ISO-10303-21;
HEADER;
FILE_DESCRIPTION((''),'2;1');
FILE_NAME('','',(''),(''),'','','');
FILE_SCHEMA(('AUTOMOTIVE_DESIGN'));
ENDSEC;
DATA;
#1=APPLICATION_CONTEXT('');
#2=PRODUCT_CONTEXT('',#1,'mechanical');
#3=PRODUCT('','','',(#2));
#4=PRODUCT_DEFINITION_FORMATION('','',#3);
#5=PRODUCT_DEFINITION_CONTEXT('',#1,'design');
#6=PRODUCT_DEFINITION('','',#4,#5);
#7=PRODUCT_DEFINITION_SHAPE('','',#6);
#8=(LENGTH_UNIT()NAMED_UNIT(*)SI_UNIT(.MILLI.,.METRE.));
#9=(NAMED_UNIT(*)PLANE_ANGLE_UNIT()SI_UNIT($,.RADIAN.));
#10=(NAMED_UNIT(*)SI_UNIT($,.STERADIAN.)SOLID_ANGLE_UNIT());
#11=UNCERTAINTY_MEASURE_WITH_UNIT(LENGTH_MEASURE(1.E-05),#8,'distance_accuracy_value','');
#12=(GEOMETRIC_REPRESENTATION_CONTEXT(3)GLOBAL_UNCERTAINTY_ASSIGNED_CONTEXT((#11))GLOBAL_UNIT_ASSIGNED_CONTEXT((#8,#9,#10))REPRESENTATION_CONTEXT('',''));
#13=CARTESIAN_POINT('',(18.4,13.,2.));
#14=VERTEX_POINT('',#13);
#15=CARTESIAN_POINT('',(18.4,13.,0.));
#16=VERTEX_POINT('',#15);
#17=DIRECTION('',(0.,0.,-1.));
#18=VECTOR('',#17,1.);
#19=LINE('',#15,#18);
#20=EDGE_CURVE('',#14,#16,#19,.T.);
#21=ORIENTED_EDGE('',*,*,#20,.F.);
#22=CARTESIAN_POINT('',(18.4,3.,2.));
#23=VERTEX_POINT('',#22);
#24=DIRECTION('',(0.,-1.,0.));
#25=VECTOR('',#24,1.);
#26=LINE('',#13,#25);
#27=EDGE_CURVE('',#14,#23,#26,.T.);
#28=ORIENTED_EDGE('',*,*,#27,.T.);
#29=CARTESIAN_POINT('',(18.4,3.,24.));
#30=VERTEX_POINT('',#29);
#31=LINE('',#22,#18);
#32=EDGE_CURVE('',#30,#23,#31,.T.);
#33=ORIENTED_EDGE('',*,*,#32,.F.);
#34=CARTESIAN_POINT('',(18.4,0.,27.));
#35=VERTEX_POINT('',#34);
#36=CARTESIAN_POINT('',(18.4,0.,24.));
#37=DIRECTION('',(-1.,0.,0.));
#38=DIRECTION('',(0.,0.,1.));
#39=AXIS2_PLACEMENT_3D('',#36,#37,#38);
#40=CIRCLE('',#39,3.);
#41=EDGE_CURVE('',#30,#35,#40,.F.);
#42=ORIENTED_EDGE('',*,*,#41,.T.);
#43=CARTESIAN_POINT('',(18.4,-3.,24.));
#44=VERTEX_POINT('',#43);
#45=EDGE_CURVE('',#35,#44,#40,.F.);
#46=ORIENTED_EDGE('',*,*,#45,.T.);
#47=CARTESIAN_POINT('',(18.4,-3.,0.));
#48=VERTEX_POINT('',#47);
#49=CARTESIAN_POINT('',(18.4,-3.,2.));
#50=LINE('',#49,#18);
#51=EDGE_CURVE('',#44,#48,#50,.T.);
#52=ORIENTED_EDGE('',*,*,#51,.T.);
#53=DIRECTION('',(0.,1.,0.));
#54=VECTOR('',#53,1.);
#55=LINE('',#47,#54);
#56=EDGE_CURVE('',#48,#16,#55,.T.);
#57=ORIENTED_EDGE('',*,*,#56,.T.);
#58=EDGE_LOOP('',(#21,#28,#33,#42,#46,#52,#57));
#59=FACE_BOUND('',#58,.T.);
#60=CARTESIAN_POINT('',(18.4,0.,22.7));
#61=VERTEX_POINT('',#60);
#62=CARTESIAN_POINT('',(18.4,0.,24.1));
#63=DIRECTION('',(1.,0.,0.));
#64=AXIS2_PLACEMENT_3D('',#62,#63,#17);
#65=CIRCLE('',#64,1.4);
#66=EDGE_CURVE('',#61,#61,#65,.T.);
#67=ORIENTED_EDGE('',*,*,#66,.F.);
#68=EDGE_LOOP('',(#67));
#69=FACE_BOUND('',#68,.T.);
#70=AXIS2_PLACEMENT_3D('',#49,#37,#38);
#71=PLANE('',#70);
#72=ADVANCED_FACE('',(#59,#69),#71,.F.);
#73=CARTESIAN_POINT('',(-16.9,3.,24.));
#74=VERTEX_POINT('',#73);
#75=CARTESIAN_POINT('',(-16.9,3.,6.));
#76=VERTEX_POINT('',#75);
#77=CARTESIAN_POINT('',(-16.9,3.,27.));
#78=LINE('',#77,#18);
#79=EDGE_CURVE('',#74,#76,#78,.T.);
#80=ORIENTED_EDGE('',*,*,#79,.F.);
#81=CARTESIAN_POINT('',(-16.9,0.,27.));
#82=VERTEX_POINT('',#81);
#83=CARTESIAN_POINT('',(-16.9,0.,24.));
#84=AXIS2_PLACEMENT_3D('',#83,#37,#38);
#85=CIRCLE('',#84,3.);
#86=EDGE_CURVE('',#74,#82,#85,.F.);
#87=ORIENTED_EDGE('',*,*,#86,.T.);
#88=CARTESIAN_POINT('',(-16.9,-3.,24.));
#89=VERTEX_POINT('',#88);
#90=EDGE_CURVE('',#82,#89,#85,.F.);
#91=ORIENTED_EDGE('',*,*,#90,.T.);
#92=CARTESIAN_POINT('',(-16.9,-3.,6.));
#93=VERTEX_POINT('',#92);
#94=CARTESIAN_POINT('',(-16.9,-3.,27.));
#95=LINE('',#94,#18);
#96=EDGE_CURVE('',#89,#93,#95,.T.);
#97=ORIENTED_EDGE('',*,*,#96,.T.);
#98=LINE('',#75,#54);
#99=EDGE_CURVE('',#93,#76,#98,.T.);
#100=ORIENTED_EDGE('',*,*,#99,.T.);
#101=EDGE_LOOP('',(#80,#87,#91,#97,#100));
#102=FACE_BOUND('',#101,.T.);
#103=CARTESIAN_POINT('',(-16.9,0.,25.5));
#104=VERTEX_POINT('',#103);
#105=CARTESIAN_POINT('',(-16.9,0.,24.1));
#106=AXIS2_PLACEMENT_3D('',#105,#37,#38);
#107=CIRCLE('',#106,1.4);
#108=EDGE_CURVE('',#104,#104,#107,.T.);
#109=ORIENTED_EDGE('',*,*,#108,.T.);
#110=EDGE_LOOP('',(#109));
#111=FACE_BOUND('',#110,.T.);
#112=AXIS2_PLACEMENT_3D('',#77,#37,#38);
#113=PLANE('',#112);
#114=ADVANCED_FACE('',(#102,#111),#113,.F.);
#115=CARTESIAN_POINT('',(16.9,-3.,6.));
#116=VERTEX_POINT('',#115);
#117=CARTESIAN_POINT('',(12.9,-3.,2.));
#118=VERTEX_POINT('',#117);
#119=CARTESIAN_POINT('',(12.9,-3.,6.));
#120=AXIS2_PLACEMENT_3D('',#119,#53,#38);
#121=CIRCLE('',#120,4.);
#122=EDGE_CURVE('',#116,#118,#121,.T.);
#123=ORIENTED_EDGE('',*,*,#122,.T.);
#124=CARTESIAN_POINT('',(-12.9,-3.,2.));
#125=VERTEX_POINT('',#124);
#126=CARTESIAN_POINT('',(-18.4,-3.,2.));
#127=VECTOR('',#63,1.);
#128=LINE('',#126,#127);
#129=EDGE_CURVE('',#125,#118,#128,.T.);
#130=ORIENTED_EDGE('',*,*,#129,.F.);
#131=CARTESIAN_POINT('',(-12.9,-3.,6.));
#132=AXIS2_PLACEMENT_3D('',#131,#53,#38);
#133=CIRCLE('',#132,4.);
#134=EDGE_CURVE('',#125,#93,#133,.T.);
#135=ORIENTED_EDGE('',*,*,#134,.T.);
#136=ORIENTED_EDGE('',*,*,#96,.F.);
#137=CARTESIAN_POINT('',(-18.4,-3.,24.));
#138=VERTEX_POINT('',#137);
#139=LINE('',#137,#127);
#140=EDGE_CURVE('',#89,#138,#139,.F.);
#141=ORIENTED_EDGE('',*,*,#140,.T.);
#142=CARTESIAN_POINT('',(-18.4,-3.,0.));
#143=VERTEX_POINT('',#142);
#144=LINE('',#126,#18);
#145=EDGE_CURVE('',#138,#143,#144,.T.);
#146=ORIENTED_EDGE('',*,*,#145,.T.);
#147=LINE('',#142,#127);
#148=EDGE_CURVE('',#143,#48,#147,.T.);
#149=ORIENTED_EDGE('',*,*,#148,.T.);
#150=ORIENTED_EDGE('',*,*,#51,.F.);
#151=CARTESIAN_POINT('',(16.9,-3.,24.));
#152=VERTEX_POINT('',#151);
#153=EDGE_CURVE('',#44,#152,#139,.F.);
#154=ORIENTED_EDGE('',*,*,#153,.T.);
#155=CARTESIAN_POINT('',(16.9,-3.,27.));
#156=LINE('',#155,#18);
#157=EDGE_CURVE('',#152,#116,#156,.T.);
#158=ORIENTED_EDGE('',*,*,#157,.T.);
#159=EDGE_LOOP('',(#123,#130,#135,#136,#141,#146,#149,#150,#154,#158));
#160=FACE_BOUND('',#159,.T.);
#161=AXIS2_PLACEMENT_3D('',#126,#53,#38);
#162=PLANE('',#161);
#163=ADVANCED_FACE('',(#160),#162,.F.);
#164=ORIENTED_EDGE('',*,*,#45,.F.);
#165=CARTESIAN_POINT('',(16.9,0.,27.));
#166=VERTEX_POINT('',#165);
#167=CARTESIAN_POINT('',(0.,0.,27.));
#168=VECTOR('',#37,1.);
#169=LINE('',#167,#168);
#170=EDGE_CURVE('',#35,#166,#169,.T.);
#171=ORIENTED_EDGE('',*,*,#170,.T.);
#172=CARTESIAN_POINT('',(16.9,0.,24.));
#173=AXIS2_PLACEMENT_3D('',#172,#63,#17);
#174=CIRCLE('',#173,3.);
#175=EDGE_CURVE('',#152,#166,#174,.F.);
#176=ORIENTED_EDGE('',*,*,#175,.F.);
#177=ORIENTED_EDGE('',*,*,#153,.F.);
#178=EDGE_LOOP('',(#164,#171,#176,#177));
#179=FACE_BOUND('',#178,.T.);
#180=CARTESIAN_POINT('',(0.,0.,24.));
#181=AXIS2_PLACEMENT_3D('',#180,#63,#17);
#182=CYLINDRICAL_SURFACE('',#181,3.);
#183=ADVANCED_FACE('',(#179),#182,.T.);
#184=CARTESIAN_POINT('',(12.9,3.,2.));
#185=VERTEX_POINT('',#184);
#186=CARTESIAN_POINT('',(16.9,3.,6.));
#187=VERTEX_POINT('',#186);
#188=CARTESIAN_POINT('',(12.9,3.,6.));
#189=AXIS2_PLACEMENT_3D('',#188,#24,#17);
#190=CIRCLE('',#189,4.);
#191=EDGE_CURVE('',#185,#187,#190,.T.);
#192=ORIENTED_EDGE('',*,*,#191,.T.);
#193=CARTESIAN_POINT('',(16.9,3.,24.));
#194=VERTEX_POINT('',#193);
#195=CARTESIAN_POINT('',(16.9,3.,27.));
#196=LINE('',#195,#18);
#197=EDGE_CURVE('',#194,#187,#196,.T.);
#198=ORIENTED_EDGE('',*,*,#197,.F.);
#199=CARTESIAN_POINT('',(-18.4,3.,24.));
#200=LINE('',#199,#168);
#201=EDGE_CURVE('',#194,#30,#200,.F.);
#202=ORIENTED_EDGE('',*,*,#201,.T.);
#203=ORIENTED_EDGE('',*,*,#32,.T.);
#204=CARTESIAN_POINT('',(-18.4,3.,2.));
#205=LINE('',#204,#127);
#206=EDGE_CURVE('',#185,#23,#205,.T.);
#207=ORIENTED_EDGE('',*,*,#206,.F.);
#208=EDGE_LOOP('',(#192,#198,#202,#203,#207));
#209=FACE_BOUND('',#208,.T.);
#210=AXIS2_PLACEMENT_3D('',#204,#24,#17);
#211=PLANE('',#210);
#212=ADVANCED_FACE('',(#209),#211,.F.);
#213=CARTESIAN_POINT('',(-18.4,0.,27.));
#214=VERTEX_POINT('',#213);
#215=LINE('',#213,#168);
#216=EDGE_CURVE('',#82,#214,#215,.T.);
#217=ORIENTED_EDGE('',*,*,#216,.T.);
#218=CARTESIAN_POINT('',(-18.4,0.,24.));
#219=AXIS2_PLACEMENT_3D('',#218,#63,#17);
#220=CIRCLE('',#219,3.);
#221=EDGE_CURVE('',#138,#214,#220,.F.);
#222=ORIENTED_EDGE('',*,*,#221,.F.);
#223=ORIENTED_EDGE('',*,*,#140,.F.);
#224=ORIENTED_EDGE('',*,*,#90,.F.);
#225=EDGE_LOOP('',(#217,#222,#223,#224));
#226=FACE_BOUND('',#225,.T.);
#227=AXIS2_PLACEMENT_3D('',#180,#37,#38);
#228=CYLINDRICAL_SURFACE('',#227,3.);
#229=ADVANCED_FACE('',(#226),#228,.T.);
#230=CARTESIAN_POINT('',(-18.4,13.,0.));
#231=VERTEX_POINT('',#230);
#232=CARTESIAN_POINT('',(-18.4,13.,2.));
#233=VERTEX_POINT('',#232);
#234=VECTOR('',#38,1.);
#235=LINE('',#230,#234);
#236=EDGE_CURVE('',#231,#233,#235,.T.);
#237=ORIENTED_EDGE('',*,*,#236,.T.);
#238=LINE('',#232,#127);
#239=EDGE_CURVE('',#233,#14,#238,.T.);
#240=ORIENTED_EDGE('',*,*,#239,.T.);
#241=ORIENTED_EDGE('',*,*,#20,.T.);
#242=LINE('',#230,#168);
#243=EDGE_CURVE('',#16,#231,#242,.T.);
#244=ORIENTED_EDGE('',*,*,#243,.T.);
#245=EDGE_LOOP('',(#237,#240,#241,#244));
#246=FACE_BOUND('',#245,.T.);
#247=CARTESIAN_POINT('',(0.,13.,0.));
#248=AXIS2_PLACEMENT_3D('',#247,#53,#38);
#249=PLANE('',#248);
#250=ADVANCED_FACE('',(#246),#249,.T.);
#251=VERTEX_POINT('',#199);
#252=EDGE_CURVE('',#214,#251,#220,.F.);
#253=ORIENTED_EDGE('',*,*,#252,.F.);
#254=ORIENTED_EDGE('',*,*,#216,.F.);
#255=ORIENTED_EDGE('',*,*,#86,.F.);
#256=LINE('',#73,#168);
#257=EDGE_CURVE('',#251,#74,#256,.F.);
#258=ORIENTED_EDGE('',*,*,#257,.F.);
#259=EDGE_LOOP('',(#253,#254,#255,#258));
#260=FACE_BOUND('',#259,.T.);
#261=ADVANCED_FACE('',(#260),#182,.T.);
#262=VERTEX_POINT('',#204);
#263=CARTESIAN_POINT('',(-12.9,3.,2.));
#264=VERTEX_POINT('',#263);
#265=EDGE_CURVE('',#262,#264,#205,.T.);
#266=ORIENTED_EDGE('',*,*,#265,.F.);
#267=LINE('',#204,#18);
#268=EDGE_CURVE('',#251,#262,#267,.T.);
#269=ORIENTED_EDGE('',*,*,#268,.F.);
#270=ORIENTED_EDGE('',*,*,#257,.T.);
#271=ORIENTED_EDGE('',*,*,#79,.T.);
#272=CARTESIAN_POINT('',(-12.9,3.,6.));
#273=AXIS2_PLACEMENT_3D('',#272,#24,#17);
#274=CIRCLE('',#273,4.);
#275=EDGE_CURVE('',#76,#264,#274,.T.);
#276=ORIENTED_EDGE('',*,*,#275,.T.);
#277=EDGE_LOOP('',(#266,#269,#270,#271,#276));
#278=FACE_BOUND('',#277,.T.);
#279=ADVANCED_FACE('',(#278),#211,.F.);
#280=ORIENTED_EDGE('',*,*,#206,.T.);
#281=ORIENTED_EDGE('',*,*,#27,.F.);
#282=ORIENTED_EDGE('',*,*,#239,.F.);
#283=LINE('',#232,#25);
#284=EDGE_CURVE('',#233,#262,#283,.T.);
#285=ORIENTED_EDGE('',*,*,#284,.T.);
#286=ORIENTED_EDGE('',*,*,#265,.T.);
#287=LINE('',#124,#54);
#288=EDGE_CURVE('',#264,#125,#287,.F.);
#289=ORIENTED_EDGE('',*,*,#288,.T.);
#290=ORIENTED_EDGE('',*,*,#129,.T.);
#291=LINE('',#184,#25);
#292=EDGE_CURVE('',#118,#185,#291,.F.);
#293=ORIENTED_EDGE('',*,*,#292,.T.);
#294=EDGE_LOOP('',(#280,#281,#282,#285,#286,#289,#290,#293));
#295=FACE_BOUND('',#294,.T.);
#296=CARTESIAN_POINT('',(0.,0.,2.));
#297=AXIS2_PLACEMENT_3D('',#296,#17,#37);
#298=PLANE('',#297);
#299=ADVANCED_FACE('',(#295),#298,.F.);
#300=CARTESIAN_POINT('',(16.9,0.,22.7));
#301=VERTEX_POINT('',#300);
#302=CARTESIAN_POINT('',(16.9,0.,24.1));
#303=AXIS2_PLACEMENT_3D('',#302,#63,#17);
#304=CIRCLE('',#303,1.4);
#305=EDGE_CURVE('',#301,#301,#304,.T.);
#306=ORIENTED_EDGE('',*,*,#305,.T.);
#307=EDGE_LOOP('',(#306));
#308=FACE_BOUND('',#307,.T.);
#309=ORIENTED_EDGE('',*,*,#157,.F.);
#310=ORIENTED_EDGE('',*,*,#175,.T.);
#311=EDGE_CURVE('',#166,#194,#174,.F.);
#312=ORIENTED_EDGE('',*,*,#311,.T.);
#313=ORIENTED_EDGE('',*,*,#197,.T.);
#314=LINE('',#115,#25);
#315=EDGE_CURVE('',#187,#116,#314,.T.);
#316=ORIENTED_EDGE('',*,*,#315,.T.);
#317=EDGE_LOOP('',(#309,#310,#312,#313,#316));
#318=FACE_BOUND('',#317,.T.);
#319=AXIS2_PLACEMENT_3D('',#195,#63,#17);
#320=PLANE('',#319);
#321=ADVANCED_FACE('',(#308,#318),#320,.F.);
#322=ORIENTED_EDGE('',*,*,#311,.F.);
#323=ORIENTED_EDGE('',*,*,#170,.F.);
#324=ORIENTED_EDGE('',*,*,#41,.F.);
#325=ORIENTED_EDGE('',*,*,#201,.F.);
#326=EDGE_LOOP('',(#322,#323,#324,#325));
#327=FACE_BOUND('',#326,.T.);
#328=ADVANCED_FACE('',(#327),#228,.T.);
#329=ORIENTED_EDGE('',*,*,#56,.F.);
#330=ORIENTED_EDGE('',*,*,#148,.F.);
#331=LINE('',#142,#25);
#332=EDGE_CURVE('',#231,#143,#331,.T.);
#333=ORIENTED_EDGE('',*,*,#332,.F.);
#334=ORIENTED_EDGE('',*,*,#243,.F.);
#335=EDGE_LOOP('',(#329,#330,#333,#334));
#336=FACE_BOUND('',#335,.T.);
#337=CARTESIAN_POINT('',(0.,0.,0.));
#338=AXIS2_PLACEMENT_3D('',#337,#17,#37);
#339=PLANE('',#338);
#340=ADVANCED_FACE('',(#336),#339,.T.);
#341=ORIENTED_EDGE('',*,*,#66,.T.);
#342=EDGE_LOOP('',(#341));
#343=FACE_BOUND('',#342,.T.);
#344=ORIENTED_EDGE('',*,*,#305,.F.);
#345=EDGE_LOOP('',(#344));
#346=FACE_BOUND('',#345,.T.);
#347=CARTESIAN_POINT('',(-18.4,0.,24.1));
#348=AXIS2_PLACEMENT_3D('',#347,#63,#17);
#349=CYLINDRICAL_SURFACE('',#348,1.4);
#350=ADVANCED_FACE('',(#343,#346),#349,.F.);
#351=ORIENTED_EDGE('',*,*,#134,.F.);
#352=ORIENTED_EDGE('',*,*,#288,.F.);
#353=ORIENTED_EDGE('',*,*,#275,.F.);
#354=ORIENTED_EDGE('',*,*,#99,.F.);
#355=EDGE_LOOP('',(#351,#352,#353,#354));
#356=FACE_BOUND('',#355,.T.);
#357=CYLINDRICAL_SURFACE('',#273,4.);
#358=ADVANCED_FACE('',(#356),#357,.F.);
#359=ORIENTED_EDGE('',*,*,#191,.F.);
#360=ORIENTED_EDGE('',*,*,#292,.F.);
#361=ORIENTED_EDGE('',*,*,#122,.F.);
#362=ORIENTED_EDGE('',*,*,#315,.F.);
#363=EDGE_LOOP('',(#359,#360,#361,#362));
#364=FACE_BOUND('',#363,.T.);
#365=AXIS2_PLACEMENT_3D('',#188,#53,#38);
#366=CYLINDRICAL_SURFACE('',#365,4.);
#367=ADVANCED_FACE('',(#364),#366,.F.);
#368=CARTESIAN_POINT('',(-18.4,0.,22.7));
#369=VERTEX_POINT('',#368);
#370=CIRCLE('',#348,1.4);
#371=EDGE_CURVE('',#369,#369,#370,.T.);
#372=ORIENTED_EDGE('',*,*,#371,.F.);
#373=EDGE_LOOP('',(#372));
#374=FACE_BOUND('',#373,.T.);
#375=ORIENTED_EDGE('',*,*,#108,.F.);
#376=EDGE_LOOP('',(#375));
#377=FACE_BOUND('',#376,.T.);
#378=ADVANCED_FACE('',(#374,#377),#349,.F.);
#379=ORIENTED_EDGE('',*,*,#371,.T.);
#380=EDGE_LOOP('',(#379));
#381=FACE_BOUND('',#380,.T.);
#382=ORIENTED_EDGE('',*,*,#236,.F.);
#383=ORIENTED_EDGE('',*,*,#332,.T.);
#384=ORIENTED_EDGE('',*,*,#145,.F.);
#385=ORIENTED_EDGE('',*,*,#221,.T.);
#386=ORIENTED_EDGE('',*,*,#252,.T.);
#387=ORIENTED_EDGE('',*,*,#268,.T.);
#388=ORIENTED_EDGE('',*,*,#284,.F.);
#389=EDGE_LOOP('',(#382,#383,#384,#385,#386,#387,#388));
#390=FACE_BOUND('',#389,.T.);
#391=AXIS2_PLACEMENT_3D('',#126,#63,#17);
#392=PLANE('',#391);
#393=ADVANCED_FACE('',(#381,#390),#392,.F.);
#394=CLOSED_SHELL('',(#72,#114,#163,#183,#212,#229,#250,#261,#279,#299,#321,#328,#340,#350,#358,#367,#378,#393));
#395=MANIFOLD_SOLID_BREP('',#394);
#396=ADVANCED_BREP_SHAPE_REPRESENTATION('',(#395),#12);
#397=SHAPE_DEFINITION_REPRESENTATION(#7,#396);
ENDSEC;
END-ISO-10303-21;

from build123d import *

# Parameters (mm, degrees)
SKETCH1_W           = 36.8
SKETCH1_H           = 6
BOSS_EXTRUDE1_DEPTH = 2
SKETCH2_W           = 1.5
SKETCH2_H           = 6
BOSS_EXTRUDE2_DEPTH = 25
SKETCH3_R           = 1.4
CUT_EXTRUDE1_DEPTH  = 46.741010046
FILLET1_R           = 3
SKETCH4_W           = 36.8
SKETCH4_H           = 2
BOSS_EXTRUDE3_DEPTH = 10
FILLET2_R           = 4


with BuildPart() as part:
    # Sketch1 → Boss-Extrude1 (new body)
    with BuildSketch(Plane.XY):
        Rectangle(SKETCH1_W, SKETCH1_H)
    extrude(amount=BOSS_EXTRUDE1_DEPTH)

    # Sketch2 → Boss-Extrude2 (add)
    with BuildSketch(Plane.XY.offset(2)):
        with Locations((-17.65, 0)):
            Rectangle(SKETCH2_W, SKETCH2_H)
        with Locations((17.65, 0)):
            Rectangle(SKETCH2_W, SKETCH2_H)
    extrude(amount=BOSS_EXTRUDE2_DEPTH)

    # Sketch3 → Cut-Extrude1 (cut, through all)
    with BuildSketch(Plane(origin=(18.4, 0, 0), x_dir=(0, 0, -1), z_dir=(1, 0, 0))):
        with Locations((-24.1, 0)):
            Circle(SKETCH3_R)
    extrude(amount=-CUT_EXTRUDE1_DEPTH, mode=Mode.SUBTRACT)

    # Fillet1
    fillet1_edges = [part.edges().sort_by_distance(p)[0] for p in [
        (-17.65, -3, 27),
        (17.65, -3, 27),
        (-17.65, 3, 27),
        (17.65, 3, 27),
    ]]
    fillet(fillet1_edges, radius=FILLET1_R - 0.0001)  # a hair under: the kernel refuses the full size

    # Sketch4 → Boss-Extrude3 (add)
    with BuildSketch(Plane(origin=(0, 3, 0), x_dir=(1, 0, 0), z_dir=(0, 1, 0))):
        with Locations((0, -1)):
            Rectangle(SKETCH4_W, SKETCH4_H)
    extrude(amount=BOSS_EXTRUDE3_DEPTH)

    # Fillet2
    fillet2_edges = [part.edges().sort_by_distance(p)[0] for p in [
        (16.9, 0, 2),
        (-16.9, 0, 2),
    ]]
    fillet(fillet2_edges, radius=FILLET2_R)


solid = part.part
